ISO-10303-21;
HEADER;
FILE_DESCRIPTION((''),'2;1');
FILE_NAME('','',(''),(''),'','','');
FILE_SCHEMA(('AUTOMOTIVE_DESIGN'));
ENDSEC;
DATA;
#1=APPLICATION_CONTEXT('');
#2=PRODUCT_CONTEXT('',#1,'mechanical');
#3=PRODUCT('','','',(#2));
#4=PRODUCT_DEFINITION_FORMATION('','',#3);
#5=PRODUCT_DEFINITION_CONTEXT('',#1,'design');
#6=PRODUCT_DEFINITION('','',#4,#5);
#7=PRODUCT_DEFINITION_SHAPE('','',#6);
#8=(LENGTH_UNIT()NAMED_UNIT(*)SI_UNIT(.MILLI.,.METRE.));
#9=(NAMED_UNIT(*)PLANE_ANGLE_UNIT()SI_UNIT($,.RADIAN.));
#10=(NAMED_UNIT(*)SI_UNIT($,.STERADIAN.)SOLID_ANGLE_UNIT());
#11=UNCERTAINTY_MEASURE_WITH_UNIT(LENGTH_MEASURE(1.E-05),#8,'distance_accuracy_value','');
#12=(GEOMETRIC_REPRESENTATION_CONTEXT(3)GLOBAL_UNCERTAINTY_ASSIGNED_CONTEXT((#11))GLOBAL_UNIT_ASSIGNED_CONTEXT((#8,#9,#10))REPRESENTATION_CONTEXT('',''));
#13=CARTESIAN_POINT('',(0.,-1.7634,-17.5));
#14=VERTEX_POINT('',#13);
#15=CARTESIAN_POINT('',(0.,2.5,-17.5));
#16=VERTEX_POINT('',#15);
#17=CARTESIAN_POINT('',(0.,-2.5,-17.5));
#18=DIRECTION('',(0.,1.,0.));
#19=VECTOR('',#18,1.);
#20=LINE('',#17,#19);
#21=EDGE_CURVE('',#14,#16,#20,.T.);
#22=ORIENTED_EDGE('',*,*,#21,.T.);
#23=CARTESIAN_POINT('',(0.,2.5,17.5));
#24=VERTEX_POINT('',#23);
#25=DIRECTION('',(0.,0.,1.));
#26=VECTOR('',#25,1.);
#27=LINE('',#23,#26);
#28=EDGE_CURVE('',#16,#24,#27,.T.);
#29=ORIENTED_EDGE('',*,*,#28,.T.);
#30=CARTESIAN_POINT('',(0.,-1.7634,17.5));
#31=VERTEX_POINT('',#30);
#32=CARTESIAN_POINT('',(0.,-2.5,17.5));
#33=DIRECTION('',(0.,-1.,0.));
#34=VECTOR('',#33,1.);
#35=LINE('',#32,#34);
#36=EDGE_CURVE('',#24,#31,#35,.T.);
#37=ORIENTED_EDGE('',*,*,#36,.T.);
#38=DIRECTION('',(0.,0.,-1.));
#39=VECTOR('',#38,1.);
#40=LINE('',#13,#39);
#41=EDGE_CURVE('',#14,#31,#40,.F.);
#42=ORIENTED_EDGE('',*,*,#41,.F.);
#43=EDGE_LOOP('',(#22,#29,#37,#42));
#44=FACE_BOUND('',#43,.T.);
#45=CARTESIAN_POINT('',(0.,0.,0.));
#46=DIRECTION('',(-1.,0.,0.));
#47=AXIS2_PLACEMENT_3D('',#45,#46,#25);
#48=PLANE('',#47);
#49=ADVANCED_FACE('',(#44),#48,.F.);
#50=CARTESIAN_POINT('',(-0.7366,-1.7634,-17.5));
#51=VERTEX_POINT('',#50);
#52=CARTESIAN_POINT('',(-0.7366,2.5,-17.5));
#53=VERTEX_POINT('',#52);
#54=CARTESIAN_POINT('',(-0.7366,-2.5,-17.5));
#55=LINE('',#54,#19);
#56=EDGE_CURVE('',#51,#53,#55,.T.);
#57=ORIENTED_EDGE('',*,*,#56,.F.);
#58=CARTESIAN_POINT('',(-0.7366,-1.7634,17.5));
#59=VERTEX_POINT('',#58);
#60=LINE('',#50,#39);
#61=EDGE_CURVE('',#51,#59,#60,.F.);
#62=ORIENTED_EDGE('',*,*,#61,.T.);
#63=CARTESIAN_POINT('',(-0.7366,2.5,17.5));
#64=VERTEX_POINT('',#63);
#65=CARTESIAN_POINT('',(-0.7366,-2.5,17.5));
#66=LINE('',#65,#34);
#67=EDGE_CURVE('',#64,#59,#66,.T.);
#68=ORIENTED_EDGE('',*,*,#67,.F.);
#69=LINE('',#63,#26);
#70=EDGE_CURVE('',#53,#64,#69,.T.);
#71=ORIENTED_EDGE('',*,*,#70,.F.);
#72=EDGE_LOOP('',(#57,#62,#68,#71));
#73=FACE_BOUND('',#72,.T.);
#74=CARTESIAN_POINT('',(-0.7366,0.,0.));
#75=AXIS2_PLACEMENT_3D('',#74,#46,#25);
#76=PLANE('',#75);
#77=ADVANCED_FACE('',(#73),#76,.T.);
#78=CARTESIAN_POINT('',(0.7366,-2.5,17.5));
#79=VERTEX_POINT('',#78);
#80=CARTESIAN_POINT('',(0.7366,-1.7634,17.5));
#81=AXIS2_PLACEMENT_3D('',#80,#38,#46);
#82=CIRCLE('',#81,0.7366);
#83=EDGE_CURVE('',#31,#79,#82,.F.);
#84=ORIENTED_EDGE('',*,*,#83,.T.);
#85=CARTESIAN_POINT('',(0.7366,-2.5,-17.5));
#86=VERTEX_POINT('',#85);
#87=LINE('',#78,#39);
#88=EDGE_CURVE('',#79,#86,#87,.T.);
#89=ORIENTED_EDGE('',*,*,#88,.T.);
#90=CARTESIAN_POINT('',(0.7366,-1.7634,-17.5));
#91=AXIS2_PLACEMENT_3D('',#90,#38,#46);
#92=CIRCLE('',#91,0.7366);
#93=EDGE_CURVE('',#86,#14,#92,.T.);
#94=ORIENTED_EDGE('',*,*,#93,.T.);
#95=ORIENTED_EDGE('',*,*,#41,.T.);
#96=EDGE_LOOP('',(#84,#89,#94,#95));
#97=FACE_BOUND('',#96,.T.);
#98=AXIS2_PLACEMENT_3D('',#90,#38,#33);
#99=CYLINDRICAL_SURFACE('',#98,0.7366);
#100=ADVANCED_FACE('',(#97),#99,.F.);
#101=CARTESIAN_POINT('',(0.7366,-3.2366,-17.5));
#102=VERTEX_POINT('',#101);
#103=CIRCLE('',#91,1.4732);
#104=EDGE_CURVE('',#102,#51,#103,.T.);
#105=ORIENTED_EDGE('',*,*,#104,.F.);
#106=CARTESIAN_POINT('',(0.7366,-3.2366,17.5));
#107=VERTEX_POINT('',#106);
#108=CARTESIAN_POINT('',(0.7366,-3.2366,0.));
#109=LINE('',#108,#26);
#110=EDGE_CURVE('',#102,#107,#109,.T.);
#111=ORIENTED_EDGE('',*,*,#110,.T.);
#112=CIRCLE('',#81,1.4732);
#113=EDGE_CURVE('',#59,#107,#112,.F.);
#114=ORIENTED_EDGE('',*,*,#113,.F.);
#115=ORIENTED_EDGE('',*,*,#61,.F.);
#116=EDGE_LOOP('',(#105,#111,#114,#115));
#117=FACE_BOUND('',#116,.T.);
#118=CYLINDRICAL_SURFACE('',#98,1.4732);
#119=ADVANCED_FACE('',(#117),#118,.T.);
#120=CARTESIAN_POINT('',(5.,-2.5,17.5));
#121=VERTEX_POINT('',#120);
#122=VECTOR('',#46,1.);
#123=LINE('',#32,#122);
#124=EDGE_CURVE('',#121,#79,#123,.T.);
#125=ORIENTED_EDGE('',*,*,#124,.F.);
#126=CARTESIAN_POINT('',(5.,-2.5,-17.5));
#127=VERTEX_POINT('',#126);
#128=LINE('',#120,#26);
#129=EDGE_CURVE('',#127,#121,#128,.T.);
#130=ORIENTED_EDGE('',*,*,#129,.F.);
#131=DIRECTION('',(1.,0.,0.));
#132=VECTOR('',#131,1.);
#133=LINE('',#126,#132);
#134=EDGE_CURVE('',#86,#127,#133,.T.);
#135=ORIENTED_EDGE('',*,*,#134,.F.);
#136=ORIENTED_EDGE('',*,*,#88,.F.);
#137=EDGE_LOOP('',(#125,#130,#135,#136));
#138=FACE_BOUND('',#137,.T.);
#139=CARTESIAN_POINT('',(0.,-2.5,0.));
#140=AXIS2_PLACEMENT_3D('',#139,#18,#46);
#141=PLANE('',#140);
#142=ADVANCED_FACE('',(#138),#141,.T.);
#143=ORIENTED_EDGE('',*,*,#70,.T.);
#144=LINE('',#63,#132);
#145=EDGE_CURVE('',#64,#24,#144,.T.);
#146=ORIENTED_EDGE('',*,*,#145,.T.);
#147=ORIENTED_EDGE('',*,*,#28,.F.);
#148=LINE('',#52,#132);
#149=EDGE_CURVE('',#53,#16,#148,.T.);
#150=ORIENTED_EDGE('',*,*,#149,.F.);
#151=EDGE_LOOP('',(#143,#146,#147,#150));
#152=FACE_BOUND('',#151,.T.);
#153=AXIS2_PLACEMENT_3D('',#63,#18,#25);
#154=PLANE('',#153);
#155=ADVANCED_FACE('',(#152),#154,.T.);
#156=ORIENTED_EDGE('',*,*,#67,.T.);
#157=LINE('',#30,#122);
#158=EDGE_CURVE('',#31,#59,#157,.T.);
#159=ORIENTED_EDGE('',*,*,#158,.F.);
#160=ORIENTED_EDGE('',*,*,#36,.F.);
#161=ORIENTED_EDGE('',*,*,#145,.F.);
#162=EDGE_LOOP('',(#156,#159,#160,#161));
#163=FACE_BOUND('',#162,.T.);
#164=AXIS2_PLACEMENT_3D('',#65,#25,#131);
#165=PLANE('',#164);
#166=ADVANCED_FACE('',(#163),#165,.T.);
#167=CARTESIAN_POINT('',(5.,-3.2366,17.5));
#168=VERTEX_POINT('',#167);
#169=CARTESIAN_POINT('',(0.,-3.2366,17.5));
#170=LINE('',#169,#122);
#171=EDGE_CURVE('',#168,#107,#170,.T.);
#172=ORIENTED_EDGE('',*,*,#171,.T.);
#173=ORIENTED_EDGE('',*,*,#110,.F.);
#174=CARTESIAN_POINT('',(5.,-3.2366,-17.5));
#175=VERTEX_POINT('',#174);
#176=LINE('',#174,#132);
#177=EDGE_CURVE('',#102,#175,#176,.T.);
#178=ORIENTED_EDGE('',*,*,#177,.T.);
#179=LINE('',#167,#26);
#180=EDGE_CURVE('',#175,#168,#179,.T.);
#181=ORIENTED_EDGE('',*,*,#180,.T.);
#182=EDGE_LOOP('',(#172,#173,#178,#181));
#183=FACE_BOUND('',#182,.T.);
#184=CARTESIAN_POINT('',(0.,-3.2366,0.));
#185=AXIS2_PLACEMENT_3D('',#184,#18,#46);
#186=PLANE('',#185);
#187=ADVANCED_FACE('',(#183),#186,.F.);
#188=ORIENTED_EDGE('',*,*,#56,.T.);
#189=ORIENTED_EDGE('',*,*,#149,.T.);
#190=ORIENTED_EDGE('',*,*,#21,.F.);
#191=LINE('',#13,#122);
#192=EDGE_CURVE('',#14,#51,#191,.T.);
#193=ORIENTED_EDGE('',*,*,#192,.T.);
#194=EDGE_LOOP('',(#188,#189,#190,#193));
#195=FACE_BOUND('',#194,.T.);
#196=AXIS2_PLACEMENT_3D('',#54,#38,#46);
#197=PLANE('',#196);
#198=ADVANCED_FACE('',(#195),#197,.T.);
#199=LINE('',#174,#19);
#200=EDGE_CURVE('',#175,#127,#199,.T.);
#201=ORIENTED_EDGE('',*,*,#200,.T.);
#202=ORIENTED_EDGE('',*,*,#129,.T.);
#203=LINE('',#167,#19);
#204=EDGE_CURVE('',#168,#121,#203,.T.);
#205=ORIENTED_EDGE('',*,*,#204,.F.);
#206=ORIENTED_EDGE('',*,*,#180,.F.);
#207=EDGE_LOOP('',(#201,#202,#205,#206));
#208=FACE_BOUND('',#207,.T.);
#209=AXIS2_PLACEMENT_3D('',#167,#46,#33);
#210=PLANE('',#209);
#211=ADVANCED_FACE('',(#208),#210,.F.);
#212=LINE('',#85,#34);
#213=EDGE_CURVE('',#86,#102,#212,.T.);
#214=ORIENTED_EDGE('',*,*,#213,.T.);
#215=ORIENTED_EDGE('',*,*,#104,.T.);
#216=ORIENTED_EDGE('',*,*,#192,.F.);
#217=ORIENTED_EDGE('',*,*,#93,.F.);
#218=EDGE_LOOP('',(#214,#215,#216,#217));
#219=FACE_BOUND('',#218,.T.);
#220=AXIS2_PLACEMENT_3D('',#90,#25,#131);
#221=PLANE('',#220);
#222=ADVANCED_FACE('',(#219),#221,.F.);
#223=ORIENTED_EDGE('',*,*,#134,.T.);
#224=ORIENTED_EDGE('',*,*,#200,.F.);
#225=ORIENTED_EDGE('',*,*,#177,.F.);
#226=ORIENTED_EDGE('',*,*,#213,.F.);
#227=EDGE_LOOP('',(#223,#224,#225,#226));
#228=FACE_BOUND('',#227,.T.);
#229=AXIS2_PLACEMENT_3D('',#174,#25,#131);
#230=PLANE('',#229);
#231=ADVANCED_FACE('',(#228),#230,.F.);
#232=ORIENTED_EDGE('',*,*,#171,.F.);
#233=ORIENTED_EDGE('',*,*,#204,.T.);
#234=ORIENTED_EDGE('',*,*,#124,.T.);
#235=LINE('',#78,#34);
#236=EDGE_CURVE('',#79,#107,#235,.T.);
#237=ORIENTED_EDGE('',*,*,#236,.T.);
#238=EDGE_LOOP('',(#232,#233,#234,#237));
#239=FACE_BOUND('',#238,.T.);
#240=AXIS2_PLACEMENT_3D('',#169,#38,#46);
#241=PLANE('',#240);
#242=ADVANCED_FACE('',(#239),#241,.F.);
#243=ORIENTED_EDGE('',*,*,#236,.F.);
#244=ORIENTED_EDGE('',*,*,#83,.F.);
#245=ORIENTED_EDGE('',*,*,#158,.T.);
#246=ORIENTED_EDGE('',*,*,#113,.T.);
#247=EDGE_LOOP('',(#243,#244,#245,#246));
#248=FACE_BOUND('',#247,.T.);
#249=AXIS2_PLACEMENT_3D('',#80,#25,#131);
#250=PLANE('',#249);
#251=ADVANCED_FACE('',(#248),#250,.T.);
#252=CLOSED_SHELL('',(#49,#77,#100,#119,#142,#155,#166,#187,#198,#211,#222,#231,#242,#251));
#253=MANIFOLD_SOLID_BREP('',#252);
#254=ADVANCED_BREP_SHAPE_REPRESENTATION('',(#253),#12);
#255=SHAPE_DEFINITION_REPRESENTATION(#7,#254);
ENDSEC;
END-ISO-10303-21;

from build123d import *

# Parameters (mm, degrees)
SKETCH1_W                    = 35
SKETCH1_H                    = 5
BASE_FLANGE1_DEPTH           = 0.7366
EDGE_FLANGE1_STRIP_W         = 14.4196
EDGE_FLANGE1_STRIP_H         = 0.7366
EDGE_FLANGE1_STRIP_CUT_DEPTH = 35
EDGE_FLANGE1_DEPTH           = 35


# Sheet-metal steps are written as plain solids
with BuildPart() as part:
    # Sketch1 → Base-Flange1 (new body)
    with BuildSketch(Plane(origin=(0, 0, 0), x_dir=(0, 0, -1), z_dir=(1, 0, 0))):
        Rectangle(SKETCH1_W, SKETCH1_H)
    extrude(amount=-BASE_FLANGE1_DEPTH)

    # Edge-Flange1 strip (across the edge) → Edge-Flange1 strip cut (cut)
    with BuildSketch(Plane(origin=(0, -2.5, 17.5), x_dir=(0, 1, 0), z_dir=(0, 0, -1))):
        with Locations((-6.4732, -0.3683)):
            Rectangle(EDGE_FLANGE1_STRIP_W, EDGE_FLANGE1_STRIP_H)
    extrude(amount=EDGE_FLANGE1_STRIP_CUT_DEPTH, mode=Mode.SUBTRACT)

    # Edge-Flange1 section (across the edge) → Edge-Flange1 (add)
    with BuildSketch(Plane(origin=(0, -2.5, 17.5), x_dir=(0, 1, 0), z_dir=(0, 0, -1))):
        with BuildLine():
            Line((-0.7366, 0.7366), (-0.7366, 5))
            Line((-0.7366, 5), (0, 5))
            Line((0, 5), (0, 0.7366))
            ThreePointArc((0, 0.7366), (0.215745145, 0.215745145), (0.7366, 0))
            Line((0.7366, 0), (0.7366, -0.7366))
            ThreePointArc((0.7366, -0.7366), (-0.30510971, -0.30510971), (-0.7366, 0.7366))
        make_face()
    extrude(amount=EDGE_FLANGE1_DEPTH)


solid = part.part
